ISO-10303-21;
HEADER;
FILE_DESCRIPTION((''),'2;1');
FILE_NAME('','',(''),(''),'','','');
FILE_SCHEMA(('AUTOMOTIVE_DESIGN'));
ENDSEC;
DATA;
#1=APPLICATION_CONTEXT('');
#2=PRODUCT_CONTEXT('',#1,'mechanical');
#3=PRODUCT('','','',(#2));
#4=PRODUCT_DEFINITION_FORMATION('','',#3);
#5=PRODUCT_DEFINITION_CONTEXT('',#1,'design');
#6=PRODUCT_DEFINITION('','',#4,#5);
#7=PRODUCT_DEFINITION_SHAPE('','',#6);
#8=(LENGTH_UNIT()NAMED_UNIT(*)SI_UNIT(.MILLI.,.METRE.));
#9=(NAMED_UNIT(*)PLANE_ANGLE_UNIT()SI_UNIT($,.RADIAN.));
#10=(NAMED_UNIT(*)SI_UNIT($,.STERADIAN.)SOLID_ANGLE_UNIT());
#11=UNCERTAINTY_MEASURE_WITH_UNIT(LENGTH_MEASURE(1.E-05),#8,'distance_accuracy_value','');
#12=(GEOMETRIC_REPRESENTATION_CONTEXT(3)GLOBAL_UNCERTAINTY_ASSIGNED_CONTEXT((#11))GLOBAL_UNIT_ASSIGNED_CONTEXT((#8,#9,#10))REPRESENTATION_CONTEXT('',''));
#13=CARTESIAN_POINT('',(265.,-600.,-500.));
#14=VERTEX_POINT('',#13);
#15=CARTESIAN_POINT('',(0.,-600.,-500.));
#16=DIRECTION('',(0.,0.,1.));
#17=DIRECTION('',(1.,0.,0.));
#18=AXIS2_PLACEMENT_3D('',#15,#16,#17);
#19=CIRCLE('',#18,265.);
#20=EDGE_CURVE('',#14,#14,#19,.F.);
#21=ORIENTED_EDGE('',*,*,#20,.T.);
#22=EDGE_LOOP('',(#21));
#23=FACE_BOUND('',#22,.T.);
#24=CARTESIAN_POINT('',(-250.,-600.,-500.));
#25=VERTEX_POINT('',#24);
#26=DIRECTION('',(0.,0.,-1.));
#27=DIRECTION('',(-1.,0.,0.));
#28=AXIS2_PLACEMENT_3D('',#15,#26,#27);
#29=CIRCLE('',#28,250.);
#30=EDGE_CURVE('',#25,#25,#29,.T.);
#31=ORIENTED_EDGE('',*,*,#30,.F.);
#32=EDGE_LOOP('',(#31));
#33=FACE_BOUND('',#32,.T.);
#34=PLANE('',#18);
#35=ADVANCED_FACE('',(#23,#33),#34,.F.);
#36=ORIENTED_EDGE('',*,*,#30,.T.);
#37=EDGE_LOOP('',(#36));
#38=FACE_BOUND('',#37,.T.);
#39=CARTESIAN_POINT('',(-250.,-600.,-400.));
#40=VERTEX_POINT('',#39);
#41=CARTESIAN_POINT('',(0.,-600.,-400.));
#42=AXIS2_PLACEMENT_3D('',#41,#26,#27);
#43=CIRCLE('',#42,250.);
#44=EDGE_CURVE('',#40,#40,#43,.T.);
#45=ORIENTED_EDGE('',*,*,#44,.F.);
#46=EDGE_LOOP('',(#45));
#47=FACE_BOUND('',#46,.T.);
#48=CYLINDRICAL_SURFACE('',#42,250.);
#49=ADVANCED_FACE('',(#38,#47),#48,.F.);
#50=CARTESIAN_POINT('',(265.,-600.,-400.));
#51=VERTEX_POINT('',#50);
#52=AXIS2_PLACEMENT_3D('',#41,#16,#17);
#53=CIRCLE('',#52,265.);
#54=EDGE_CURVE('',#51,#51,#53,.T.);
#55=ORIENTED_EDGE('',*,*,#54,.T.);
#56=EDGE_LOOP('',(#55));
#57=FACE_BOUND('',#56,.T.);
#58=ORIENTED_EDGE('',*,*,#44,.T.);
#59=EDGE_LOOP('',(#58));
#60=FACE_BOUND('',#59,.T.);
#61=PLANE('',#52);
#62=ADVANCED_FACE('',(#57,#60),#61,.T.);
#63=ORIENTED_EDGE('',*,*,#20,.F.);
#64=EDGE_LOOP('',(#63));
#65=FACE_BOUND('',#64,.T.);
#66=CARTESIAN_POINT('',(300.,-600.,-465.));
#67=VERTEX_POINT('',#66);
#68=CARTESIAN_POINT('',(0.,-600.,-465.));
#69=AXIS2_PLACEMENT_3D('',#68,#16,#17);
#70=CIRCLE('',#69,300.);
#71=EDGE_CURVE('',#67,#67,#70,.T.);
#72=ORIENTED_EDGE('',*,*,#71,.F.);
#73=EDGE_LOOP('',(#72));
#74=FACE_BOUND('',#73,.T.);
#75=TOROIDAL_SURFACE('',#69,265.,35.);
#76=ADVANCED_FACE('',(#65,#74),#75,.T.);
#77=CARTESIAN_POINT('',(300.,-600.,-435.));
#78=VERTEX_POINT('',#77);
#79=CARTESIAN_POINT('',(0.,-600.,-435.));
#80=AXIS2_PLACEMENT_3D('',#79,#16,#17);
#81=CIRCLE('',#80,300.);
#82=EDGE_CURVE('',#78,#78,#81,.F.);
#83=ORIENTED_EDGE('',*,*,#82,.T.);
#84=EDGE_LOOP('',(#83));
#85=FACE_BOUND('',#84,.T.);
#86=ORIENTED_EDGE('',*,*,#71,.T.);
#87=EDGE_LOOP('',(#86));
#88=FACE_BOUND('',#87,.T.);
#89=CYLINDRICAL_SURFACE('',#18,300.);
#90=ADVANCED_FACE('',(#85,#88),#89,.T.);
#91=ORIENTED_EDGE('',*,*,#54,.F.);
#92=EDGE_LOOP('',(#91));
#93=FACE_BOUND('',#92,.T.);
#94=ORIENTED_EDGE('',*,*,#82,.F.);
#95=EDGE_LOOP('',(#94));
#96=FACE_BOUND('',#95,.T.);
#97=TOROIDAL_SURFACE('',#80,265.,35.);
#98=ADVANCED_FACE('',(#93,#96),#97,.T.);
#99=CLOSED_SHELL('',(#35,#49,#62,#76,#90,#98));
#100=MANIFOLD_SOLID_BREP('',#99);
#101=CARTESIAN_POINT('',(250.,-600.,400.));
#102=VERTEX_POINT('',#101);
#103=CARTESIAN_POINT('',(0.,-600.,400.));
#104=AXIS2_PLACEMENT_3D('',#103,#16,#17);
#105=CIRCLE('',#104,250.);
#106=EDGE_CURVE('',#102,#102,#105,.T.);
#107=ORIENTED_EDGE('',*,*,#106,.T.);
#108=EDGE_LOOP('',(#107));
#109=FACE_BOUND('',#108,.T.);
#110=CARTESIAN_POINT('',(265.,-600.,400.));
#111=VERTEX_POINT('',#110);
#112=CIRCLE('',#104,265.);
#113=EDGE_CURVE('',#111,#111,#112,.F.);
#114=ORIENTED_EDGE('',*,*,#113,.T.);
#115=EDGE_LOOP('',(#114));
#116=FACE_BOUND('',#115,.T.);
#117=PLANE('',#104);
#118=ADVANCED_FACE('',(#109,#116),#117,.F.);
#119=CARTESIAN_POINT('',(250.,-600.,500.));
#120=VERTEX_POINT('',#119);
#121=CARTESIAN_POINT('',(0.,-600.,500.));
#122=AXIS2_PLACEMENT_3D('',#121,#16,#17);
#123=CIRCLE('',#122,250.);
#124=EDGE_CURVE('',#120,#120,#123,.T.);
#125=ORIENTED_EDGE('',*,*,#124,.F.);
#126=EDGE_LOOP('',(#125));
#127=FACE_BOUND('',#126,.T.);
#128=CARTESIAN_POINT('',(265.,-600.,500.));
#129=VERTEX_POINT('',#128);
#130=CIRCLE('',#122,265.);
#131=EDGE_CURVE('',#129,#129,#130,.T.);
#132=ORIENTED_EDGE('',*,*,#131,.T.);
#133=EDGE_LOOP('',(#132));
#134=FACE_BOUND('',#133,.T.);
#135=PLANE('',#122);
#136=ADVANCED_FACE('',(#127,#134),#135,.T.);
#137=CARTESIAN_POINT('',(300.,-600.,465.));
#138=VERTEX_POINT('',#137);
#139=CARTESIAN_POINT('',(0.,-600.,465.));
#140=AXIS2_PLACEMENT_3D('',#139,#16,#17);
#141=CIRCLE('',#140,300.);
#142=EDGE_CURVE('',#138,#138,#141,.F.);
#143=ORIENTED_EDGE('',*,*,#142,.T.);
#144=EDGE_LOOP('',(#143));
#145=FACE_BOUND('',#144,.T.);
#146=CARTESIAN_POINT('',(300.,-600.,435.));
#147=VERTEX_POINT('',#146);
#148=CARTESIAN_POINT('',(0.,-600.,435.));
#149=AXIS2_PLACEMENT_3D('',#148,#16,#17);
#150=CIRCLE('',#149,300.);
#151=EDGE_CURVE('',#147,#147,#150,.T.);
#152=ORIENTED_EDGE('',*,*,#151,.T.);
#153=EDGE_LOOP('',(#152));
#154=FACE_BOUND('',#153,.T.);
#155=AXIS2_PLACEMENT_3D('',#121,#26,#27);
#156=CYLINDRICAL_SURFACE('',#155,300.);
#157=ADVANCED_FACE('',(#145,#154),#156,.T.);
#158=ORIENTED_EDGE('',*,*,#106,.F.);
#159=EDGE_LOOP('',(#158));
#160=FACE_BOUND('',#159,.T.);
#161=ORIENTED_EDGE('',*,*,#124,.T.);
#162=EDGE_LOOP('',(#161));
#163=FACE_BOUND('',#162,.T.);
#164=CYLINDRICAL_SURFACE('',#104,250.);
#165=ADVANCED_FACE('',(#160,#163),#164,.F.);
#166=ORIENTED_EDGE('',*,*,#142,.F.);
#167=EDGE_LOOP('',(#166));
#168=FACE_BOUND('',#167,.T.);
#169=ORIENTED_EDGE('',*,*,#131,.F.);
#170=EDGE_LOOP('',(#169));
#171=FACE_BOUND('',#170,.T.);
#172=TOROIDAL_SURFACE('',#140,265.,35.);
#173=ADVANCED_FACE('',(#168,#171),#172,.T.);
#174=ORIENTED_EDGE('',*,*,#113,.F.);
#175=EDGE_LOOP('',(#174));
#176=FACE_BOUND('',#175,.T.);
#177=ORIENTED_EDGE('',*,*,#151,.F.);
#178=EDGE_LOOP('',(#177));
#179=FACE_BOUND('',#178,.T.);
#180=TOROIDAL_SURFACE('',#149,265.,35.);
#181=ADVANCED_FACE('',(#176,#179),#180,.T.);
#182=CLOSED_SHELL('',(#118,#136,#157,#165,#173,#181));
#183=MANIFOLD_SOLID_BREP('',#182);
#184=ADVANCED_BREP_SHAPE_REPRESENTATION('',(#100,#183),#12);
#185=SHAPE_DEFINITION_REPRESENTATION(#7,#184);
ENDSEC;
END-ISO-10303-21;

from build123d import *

# Parameters (mm, degrees)
BOSS_EXTRUDE1_START     = -100
BOSS_EXTRUDE1_OUTLINE_R = 300
BOSS_EXTRUDE1_DEPTH     = 100
FILLET3_R               = 35
SKETCH5_R               = 250
CUT_EXTRUDE1_DEPTH      = 100
SKETCH13_R              = 300
BOSS_EXTRUDE11_DEPTH    = 100
FILLET4_R               = 35
CUT_EXTRUDE2_START      = -100
SKETCH14_R              = 250
CUT_EXTRUDE2_DEPTH      = 100


# Read off the part's stored shape, not the designer's step: Boss-Extrude1
with BuildPart() as part:
    # Boss-Extrude1 outline → Boss-Extrude1 (new body)
    with BuildSketch(Plane.XY.offset(-400).offset(BOSS_EXTRUDE1_START)):
        with Locations((0, -600)):
            Circle(BOSS_EXTRUDE1_OUTLINE_R)
    extrude(amount=BOSS_EXTRUDE1_DEPTH)

    # Fillet3
    fillet3_edges = [part.edges().sort_by_distance(p)[0] for p in [
        (-300, -600, -400),
        (-300, -600, -500),
    ]]
    fillet(fillet3_edges, radius=FILLET3_R)

    # Sketch5 → Cut-Extrude1 (cut)
    with BuildSketch(Plane(origin=(0, 0, -500), x_dir=(-1, 0, 0), z_dir=(0, 0, -1))):
        with Locations((0, -600)):
            Circle(SKETCH5_R)
    extrude(amount=-CUT_EXTRUDE1_DEPTH, mode=Mode.SUBTRACT)


with BuildPart() as body_2:
    # Sketch13 → Boss-Extrude11 (new body)
    with BuildSketch(Plane.XY.offset(400)):
        with Locations((0, -600)):
            Circle(SKETCH13_R)
    extrude(amount=BOSS_EXTRUDE11_DEPTH)

    # Fillet4
    fillet4_edges = [body_2.edges().sort_by_distance(p)[0] for p in [
        (-300, -600, 400),
        (-300, -600, 500),
    ]]
    fillet(fillet4_edges, radius=FILLET4_R)

    # Sketch14 → Cut-Extrude2 (cut)
    with BuildSketch(Plane.XY.offset(500).offset(CUT_EXTRUDE2_START)):
        with Locations((0, -600)):
            Circle(SKETCH14_R)
    extrude(amount=CUT_EXTRUDE2_DEPTH, mode=Mode.SUBTRACT)


solid = Compound([part.part, body_2.part])
